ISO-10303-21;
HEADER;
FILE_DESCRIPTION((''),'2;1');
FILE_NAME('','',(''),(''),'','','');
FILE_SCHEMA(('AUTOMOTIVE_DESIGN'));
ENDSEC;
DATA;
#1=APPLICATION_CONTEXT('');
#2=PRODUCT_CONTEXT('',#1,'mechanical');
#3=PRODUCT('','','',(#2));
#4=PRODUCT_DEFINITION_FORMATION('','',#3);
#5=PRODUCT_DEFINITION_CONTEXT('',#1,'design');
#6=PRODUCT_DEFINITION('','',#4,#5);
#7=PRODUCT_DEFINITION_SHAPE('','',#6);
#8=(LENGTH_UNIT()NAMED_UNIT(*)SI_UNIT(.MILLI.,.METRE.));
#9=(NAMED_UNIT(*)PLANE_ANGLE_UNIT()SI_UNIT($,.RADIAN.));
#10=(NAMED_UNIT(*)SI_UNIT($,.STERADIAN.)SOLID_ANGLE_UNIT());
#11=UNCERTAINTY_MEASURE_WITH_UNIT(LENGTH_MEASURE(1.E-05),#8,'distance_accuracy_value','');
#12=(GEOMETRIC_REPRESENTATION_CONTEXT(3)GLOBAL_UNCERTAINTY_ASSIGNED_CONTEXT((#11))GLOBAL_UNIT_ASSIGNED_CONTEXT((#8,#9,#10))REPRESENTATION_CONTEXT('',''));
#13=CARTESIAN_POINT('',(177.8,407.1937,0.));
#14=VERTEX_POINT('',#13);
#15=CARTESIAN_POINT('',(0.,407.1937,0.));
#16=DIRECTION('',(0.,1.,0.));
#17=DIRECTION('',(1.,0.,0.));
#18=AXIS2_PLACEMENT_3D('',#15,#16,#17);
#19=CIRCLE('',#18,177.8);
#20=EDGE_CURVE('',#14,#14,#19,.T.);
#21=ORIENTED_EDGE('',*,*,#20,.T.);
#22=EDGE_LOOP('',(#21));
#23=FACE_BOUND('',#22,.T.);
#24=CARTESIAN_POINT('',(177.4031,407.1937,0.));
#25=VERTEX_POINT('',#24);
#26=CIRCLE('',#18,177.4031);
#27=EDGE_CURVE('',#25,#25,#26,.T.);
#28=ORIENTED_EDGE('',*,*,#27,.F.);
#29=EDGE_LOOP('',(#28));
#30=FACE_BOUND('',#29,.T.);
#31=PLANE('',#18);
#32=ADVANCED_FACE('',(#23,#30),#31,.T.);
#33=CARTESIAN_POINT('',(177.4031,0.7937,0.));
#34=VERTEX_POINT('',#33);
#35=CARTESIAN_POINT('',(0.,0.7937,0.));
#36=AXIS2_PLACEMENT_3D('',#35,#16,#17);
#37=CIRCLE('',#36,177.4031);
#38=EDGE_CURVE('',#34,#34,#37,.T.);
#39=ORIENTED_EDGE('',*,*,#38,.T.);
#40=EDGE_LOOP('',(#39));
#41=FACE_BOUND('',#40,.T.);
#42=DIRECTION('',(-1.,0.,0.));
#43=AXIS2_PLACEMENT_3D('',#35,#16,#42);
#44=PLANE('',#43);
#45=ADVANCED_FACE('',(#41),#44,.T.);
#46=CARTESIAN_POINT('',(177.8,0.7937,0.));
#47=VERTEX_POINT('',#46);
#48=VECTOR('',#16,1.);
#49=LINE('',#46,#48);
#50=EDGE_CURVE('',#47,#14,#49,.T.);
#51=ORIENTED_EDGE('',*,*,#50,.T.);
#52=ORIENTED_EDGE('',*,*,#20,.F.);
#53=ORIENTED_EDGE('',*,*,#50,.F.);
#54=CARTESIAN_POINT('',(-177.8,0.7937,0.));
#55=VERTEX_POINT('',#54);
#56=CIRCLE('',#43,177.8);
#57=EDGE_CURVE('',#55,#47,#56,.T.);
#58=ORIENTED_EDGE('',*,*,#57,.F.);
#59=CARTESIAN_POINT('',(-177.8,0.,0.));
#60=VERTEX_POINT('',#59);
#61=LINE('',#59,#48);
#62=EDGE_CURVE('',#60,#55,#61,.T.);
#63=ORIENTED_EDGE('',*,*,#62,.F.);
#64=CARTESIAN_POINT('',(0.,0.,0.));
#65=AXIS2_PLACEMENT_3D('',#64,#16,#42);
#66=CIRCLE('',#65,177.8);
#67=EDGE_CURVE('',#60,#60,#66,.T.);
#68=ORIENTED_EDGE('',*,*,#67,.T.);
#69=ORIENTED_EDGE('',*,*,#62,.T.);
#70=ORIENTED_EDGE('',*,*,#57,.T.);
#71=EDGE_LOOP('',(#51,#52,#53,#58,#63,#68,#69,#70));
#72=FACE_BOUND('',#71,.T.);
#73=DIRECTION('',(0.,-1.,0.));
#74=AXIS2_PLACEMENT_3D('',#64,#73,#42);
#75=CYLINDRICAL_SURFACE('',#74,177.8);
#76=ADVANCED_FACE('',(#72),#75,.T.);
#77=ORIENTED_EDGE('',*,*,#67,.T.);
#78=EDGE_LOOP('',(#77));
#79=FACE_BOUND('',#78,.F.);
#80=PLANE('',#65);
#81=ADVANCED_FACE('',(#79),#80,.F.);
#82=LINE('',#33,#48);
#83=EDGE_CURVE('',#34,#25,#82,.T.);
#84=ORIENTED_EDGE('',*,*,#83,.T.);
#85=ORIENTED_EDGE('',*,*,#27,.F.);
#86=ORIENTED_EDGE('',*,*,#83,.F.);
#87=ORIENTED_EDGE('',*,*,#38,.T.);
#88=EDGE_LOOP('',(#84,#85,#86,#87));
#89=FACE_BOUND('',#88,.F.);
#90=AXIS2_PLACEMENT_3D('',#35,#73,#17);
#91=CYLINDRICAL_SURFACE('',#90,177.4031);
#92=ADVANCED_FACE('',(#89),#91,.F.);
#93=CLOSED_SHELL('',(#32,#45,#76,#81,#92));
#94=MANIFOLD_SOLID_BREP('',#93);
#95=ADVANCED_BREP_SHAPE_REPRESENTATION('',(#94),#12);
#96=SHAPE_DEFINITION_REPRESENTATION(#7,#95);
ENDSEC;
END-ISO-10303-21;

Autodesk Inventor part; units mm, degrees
ref_plane "YZ Plane" through (0, 0, 0) normal (1, 0, 0) x (0, 1, 0)
ref_plane "XZ Plane" through (0, 0, 0) normal (0, 1, 0) x (-1, 0, 0)
ref_plane "XY Plane" through (0, 0, 0) normal (0, 0, 1) x (1, 0, 0)
sketch "Sketch1" plane through (0, 0, 0) normal (0, 1, 0) x (-1, 0, 0)
  circle A0 centre (0, 0) radius 177.8
  dimension "d0" = 355.6
extrude "Extrusion1" add sketch "Sketch1" along normal blind 0.7937
sketch "Sketch2" plane through (0, 0.7937, 0) normal (0, 1, 0) x (1, 0, 0)
  circle A0 centre (0, 0) radius 177.8 projected
  circle A1 centre (0, 0) radius 177.4031
  dimension "d3" = 354.8062
extrude "Extrusion2" add sketch "Sketch2" along normal blind 406.4
properties part number "Kettle-Placeholder"
